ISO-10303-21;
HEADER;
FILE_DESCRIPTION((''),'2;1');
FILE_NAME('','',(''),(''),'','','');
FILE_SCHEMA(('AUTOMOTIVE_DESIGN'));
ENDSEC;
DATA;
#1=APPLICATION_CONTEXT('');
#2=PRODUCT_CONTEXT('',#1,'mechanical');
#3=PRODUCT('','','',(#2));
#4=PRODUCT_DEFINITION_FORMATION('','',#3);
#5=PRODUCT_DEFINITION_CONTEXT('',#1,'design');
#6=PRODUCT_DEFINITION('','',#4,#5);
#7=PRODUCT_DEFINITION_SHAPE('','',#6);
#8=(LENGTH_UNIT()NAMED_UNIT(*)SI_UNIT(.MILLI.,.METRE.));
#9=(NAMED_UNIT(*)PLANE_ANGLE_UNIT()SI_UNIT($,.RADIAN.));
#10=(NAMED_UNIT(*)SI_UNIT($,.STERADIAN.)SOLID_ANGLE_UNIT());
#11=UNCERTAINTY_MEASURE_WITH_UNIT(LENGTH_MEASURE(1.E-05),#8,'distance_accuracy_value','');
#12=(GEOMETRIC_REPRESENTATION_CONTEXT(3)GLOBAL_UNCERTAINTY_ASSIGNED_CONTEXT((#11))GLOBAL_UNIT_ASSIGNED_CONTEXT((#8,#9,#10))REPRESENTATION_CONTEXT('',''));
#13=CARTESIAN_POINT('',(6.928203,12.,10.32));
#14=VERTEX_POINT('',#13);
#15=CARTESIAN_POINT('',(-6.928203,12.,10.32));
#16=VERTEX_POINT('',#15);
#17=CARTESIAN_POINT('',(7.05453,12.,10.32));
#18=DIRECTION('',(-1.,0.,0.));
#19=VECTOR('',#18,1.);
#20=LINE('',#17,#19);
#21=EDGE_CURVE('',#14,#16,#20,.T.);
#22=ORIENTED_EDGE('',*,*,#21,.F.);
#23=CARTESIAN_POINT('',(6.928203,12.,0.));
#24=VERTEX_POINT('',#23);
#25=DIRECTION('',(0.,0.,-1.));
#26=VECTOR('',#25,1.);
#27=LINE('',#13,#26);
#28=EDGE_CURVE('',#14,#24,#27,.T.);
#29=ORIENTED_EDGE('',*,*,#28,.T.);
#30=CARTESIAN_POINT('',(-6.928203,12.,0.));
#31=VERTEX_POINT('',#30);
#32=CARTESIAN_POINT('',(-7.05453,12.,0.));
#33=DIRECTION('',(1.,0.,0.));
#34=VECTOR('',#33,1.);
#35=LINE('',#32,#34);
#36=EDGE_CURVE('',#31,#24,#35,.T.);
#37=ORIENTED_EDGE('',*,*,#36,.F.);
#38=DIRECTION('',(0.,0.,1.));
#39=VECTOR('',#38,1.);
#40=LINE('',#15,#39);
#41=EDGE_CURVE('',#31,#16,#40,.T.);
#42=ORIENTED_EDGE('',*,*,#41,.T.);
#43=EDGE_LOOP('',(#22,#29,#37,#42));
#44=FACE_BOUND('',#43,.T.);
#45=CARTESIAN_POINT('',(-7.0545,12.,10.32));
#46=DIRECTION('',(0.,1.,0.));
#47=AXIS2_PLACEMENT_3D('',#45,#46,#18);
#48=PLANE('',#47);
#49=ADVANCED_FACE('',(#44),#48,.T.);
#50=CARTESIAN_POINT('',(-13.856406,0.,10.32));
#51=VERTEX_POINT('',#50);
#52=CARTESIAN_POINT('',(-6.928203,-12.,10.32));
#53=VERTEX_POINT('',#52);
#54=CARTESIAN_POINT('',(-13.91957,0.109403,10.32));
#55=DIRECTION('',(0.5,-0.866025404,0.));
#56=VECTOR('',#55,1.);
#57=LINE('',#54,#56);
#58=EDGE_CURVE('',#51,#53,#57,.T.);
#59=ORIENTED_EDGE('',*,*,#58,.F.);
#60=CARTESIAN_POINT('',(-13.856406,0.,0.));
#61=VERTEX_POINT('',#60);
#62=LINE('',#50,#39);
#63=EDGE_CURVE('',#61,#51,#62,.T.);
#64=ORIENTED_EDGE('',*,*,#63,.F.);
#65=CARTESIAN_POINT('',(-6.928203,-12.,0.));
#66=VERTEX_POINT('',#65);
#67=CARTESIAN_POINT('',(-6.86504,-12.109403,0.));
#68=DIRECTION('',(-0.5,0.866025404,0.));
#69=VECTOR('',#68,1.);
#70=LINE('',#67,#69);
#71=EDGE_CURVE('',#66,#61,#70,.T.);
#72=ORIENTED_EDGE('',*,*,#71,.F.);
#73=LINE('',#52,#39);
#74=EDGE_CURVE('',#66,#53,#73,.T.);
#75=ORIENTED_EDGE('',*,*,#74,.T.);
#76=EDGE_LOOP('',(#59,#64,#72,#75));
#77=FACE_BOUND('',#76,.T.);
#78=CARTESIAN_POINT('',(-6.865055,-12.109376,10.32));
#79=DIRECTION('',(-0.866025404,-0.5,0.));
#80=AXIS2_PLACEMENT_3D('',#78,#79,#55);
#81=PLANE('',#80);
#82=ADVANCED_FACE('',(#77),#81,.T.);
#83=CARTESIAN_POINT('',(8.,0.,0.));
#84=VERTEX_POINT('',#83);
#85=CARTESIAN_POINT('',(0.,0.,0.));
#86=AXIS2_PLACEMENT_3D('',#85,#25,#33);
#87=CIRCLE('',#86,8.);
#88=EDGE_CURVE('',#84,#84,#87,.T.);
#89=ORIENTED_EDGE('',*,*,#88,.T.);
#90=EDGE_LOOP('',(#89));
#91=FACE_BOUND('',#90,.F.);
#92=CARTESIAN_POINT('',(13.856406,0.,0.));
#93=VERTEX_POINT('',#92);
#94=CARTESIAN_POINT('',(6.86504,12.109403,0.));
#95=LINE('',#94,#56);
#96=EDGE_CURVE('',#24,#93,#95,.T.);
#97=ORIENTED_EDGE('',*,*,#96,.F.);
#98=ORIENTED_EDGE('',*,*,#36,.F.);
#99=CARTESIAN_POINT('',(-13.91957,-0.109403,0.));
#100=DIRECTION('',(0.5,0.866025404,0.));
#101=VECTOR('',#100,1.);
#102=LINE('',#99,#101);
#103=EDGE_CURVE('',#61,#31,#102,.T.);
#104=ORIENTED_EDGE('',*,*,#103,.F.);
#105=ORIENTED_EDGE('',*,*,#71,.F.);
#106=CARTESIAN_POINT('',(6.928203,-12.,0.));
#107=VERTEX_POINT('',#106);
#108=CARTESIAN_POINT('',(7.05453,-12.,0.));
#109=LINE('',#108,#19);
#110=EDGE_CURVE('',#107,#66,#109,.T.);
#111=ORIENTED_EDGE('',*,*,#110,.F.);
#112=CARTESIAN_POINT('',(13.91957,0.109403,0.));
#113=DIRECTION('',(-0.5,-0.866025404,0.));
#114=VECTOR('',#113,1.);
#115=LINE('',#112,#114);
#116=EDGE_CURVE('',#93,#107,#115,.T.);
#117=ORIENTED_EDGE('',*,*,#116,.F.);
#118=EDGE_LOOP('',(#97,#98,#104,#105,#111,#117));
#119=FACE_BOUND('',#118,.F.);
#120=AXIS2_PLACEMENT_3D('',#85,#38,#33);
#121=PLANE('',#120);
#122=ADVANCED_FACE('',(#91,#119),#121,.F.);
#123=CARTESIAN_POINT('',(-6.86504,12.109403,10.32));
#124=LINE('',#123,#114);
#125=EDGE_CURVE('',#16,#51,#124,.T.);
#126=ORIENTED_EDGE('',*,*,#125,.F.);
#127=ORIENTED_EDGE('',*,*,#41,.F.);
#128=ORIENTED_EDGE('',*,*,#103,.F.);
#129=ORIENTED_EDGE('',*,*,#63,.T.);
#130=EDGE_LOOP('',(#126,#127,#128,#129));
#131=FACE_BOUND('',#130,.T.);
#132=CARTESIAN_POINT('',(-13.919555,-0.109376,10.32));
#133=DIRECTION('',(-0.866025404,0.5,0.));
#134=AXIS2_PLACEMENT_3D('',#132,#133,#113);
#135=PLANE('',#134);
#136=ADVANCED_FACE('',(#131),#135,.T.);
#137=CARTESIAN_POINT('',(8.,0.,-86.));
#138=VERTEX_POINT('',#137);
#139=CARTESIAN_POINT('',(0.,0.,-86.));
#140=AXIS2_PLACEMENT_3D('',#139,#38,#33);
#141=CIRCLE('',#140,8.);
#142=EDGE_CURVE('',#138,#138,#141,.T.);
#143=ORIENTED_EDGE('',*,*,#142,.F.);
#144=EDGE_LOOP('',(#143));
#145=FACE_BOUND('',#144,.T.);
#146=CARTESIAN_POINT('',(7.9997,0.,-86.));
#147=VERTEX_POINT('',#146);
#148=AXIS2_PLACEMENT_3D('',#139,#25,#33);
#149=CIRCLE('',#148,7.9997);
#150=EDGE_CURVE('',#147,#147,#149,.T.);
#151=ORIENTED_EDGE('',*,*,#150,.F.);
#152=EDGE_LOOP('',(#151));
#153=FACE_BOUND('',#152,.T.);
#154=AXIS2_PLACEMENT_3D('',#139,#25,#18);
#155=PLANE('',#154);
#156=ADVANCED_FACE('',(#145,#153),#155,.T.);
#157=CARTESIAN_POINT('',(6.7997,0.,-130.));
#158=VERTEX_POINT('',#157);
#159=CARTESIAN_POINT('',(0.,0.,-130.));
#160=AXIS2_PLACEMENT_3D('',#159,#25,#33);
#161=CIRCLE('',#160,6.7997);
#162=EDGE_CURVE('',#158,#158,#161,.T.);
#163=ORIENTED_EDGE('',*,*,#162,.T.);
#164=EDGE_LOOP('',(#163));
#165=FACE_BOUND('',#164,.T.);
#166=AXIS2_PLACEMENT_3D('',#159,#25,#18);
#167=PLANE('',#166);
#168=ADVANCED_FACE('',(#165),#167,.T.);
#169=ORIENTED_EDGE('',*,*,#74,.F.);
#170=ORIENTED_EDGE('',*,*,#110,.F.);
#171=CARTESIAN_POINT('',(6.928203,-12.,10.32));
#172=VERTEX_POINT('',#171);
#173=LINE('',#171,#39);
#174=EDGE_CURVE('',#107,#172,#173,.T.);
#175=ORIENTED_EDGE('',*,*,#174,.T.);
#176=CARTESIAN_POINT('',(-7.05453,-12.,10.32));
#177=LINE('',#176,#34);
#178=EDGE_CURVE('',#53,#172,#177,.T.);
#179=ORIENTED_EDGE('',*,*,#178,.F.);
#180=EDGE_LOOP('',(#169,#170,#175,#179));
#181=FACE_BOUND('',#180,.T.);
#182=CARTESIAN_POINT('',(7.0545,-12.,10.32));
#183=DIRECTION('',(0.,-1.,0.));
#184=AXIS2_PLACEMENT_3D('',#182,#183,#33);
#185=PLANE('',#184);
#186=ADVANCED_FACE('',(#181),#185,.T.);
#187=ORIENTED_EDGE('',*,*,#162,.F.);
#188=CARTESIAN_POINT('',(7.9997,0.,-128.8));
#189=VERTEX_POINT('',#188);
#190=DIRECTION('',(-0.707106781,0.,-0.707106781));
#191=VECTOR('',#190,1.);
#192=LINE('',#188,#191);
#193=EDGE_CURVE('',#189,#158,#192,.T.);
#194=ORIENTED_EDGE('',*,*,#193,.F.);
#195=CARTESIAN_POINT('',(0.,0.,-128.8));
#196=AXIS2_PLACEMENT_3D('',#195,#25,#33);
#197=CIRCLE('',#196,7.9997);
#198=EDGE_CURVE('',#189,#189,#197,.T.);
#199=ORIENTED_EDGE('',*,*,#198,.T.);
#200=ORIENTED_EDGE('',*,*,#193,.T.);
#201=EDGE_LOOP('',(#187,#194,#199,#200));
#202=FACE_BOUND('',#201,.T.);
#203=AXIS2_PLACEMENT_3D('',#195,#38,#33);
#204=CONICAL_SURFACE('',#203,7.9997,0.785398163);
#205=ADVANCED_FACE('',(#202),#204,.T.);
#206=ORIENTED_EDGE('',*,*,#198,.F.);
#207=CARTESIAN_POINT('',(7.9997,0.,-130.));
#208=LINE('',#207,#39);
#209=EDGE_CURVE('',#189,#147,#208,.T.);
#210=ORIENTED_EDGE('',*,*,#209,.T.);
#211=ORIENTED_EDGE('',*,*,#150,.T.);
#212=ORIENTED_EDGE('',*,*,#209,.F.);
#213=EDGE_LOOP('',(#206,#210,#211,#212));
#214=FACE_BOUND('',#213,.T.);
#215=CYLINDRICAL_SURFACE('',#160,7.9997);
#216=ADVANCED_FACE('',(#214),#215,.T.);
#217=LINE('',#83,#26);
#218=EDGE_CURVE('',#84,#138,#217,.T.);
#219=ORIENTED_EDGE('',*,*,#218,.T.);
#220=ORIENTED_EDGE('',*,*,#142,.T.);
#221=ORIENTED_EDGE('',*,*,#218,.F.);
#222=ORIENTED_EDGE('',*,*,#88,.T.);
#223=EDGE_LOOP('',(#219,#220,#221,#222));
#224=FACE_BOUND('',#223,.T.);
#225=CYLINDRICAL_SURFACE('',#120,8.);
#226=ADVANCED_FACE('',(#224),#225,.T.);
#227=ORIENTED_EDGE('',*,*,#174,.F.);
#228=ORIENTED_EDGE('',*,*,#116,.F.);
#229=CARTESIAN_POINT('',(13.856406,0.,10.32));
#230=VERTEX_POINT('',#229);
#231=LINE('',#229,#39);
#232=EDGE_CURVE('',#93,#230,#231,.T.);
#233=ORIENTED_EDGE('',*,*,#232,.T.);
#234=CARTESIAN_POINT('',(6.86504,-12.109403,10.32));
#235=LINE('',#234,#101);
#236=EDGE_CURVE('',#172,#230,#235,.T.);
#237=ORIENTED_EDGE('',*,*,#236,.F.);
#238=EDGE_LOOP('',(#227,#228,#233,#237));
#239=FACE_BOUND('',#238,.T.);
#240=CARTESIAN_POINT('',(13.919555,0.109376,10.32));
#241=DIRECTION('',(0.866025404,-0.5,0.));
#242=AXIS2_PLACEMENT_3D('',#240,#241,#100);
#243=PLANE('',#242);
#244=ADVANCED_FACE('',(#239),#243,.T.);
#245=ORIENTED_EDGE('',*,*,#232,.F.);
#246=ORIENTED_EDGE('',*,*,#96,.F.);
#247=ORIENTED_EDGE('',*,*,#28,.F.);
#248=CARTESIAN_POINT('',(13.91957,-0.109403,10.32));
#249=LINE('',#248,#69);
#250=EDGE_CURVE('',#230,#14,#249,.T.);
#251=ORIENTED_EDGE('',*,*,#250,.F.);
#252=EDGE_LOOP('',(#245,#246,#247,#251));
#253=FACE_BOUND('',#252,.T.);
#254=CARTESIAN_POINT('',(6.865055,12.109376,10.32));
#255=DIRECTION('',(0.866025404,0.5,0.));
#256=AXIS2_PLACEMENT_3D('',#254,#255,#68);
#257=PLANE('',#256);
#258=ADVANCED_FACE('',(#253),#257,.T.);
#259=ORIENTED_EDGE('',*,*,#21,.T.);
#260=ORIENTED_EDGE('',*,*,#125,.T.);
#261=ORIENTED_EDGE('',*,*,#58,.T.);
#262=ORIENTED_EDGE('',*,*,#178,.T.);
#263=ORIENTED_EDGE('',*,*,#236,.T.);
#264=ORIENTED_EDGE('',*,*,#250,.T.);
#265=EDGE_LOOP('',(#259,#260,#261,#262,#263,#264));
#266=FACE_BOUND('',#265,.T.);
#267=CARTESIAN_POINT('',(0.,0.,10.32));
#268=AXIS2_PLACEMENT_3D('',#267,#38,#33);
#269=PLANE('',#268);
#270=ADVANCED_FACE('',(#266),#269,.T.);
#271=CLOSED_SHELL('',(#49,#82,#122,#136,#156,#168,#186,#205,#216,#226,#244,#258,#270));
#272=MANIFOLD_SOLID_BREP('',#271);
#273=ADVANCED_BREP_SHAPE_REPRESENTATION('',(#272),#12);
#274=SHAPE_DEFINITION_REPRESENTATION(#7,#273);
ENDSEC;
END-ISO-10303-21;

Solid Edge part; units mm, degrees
sketch "Sketch1" plane through (0, 0, 0) normal (0, 0, 1) x (1, 0, 0)
  circle A0 centre (0, 0) radius 13.92
  dimension "D1" = 27.84
extrude "Protrusion1" add sketch "Sketch1" along normal blind 10.32
sketch "Sketch2" plane through (0, 0, 0) normal (0, 0, -1) x (1, 0, 0)
  circle A0 centre (0, 0) radius 8
extrude "Protrusion2" add sketch "Sketch2" along normal blind 130
sketch "Sketch3" plane through (0, 0, -130) normal (0, 0, -1) x (1, 0, 0)
  circle A0 centre (0, 0) radius 7.9997
extrude "Cutout1" cut sketch "Sketch3" against normal blind 44 flip side to cut
chamfer "Chamfer_1" distance 1.2 angle 45 1 edges at (-7.9997, 0, -130)
sketch "Sketch4" plane through (0, 0, 10.32) normal (0, 0, 1) x (1, 0, 0)
  line L0 (-7.0545, 12) -> (7.0545, 12)
  dimension "D1" = 24
extrude "Cutout2" cut sketch "Sketch4" against normal up to next material side at (0, 12.05, 10.32)
pattern_circular "Pattern1" count 6 over 360 about axis through (0, 0, 10.32) along (0, 0, 1) of "Cutout2"
properties part number "107690"
